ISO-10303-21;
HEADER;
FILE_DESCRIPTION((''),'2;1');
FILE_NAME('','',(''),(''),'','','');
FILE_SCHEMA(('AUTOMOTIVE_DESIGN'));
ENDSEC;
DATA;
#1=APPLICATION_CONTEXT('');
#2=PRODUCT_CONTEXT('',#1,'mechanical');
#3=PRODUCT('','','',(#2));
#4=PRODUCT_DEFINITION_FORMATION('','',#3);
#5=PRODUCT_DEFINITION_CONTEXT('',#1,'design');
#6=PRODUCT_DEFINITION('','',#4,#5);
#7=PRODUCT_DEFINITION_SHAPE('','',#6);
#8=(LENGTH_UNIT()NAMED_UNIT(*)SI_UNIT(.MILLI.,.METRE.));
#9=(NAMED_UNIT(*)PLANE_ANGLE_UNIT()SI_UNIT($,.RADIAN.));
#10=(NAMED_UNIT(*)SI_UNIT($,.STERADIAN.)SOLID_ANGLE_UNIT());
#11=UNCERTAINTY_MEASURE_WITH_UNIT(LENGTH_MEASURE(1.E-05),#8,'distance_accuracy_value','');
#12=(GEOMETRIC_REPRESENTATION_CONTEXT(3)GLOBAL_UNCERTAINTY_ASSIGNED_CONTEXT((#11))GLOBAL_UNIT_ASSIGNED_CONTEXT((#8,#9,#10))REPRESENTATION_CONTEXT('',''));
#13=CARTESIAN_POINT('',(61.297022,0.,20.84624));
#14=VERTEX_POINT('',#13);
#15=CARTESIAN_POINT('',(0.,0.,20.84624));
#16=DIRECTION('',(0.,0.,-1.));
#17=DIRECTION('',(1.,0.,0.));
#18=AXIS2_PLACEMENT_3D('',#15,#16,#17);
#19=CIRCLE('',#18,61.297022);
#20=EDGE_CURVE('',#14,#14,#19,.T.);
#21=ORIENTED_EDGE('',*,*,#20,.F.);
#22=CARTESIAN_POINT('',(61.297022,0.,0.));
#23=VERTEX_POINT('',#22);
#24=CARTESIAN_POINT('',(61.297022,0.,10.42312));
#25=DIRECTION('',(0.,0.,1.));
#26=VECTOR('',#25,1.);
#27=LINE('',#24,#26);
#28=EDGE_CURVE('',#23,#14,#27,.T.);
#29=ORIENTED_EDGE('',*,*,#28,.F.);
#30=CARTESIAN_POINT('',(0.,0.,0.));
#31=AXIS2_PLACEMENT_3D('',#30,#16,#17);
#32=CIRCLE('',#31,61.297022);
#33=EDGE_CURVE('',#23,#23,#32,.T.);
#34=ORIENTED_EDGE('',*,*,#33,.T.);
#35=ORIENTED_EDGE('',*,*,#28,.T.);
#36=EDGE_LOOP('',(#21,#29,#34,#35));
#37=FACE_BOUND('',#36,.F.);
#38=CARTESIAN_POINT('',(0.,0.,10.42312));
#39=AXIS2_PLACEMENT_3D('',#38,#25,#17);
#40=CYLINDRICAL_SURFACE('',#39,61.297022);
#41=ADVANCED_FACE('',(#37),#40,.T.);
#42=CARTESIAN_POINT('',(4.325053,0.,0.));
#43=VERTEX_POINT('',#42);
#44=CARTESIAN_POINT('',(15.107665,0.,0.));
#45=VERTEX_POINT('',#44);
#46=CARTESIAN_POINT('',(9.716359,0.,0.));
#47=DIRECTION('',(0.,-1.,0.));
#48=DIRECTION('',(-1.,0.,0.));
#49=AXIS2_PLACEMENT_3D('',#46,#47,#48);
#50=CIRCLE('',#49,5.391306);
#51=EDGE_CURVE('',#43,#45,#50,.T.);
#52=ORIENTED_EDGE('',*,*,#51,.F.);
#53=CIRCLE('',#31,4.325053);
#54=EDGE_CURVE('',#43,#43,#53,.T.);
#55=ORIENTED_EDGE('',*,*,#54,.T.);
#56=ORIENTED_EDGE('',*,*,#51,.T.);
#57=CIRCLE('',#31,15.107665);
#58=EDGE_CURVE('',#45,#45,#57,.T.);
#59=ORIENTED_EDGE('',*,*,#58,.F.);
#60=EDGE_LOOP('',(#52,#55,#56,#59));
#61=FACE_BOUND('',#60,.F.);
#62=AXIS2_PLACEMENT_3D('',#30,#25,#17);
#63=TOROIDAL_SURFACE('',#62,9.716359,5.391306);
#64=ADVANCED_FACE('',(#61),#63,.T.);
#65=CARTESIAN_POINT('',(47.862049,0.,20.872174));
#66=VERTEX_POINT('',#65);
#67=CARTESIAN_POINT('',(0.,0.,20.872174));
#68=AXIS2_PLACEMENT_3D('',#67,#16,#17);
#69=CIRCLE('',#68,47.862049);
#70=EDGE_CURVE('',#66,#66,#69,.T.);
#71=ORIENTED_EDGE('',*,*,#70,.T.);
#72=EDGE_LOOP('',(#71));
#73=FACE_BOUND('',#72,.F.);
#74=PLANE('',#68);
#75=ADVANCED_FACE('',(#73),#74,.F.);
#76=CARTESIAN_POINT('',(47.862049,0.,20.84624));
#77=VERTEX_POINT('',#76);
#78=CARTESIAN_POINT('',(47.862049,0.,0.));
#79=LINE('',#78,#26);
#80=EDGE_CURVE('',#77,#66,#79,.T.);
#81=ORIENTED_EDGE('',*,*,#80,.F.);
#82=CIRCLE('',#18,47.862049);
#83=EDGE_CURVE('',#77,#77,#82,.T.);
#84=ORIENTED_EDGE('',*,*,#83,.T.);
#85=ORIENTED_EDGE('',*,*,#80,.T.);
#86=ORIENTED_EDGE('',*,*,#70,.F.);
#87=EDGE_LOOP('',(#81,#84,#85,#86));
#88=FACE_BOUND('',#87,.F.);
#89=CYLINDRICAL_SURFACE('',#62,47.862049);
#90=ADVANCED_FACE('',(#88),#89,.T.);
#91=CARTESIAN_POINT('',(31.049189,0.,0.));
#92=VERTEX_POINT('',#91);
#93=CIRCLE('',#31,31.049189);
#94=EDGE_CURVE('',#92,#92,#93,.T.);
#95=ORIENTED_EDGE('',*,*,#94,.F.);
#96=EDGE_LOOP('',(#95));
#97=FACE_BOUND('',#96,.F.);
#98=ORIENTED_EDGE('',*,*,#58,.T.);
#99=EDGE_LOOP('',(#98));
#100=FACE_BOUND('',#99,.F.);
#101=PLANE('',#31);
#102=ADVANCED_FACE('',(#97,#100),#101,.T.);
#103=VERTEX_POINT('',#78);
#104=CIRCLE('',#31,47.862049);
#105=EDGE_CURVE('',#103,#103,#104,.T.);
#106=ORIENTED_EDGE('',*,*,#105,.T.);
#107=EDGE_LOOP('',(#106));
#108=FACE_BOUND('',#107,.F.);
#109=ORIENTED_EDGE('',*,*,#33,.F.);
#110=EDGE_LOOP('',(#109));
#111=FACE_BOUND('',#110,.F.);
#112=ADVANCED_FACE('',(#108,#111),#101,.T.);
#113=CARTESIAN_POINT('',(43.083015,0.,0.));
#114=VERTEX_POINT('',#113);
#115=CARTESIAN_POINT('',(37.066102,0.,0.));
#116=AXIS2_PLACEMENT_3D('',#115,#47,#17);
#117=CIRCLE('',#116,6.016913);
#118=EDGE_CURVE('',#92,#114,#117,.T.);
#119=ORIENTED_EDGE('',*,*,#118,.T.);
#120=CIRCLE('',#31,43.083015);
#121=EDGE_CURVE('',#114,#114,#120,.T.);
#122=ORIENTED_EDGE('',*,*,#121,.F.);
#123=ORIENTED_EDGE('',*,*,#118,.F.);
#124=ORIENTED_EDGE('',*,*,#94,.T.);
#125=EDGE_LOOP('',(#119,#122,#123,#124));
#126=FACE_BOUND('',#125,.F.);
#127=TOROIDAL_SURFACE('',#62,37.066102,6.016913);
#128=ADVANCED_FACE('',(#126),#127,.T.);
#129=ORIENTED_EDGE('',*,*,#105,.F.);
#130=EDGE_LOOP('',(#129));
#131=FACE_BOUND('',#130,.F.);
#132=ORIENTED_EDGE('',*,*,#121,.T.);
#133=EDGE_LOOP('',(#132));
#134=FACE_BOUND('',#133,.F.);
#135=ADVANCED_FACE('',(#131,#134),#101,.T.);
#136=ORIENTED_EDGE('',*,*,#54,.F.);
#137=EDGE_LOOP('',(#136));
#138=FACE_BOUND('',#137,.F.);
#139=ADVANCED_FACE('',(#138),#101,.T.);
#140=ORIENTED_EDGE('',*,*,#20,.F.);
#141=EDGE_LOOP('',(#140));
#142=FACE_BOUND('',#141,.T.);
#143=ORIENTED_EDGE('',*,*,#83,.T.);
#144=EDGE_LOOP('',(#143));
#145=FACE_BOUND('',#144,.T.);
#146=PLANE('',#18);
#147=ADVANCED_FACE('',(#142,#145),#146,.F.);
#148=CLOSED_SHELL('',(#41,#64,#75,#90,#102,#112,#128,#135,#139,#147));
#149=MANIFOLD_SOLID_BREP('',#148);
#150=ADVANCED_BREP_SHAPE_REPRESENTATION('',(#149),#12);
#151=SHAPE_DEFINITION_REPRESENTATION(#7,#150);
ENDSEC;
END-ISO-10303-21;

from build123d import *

# Parameters (mm, degrees)
F0_W = 13.434972614
F0_H = 20.8462406445


# Not quite as in the source:
# - ends of sketch curves that miss each other by under 0.0002 mm in the source are joined


with BuildPart() as f1:
    # F0 (on Front) → F1 (revolve)
    with BuildSketch(Plane.XZ):
        with BuildLine():
            ThreePointArc((31.0491894541, 4.37e-08), (37.0661020279, -6.0169125301), (43.0830146017, 4.37e-08))
            Line((43.0830146017, 4.37e-08), (31.0491894541, 4.37e-08))
        make_face()
        with Locations((54.5795354992, 10.4231199002)):
            Rectangle(F0_W, F0_H)
        with BuildLine():
            Line((31.0491894541, 4.37e-08), (43.0830146017, 4.37e-08))
            ThreePointArc((43.0830146017, 4.37e-08), (37.0661020279, 6.0169126175), (31.0491894541, 4.37e-08))
        make_face()
        with BuildLine():
            Line((47.8620491922, 20.8721738309), (0, 20.8721738309))
            Line((0, 20.8721738309), (0, 4.37e-08))
            Line((0, 4.37e-08), (4.3250534176, 4.37e-08))
            ThreePointArc((4.3250534176, 4.37e-08), (9.7163589671, 5.3913055932), (15.1076645166, 4.37e-08))
            Line((15.1076645166, 4.37e-08), (31.0491894541, 4.37e-08))
            ThreePointArc((31.0491894541, 4.37e-08), (37.0661020279, 6.0169126175), (43.0830146017, 4.37e-08))
            Line((43.0830146017, 4.37e-08), (47.8620491922, 4.37e-08))
            Line((47.8620491922, 4.37e-08), (47.8620491922, 20.8462402225))
            Line((47.8620491922, 20.8462402225), (47.8620491922, 20.8721738309))
        make_face()
        with BuildLine():
            ThreePointArc((15.1076645166, 4.37e-08), (9.7163589671, 5.3913055932), (4.3250534176, 4.37e-08))
            Line((4.3250534176, 4.37e-08), (15.1076645166, 4.37e-08))
        make_face()
        with BuildLine():
            Line((15.1076645166, 4.37e-08), (4.3250534176, 4.37e-08))
            ThreePointArc((4.3250534176, 4.37e-08), (9.7163589671, -5.3913055058), (15.1076645166, 4.37e-08))
        make_face()
    revolve(axis=Axis((0, 0, 10.4360869373), (0, 0, -1)))


solid = f1.part
